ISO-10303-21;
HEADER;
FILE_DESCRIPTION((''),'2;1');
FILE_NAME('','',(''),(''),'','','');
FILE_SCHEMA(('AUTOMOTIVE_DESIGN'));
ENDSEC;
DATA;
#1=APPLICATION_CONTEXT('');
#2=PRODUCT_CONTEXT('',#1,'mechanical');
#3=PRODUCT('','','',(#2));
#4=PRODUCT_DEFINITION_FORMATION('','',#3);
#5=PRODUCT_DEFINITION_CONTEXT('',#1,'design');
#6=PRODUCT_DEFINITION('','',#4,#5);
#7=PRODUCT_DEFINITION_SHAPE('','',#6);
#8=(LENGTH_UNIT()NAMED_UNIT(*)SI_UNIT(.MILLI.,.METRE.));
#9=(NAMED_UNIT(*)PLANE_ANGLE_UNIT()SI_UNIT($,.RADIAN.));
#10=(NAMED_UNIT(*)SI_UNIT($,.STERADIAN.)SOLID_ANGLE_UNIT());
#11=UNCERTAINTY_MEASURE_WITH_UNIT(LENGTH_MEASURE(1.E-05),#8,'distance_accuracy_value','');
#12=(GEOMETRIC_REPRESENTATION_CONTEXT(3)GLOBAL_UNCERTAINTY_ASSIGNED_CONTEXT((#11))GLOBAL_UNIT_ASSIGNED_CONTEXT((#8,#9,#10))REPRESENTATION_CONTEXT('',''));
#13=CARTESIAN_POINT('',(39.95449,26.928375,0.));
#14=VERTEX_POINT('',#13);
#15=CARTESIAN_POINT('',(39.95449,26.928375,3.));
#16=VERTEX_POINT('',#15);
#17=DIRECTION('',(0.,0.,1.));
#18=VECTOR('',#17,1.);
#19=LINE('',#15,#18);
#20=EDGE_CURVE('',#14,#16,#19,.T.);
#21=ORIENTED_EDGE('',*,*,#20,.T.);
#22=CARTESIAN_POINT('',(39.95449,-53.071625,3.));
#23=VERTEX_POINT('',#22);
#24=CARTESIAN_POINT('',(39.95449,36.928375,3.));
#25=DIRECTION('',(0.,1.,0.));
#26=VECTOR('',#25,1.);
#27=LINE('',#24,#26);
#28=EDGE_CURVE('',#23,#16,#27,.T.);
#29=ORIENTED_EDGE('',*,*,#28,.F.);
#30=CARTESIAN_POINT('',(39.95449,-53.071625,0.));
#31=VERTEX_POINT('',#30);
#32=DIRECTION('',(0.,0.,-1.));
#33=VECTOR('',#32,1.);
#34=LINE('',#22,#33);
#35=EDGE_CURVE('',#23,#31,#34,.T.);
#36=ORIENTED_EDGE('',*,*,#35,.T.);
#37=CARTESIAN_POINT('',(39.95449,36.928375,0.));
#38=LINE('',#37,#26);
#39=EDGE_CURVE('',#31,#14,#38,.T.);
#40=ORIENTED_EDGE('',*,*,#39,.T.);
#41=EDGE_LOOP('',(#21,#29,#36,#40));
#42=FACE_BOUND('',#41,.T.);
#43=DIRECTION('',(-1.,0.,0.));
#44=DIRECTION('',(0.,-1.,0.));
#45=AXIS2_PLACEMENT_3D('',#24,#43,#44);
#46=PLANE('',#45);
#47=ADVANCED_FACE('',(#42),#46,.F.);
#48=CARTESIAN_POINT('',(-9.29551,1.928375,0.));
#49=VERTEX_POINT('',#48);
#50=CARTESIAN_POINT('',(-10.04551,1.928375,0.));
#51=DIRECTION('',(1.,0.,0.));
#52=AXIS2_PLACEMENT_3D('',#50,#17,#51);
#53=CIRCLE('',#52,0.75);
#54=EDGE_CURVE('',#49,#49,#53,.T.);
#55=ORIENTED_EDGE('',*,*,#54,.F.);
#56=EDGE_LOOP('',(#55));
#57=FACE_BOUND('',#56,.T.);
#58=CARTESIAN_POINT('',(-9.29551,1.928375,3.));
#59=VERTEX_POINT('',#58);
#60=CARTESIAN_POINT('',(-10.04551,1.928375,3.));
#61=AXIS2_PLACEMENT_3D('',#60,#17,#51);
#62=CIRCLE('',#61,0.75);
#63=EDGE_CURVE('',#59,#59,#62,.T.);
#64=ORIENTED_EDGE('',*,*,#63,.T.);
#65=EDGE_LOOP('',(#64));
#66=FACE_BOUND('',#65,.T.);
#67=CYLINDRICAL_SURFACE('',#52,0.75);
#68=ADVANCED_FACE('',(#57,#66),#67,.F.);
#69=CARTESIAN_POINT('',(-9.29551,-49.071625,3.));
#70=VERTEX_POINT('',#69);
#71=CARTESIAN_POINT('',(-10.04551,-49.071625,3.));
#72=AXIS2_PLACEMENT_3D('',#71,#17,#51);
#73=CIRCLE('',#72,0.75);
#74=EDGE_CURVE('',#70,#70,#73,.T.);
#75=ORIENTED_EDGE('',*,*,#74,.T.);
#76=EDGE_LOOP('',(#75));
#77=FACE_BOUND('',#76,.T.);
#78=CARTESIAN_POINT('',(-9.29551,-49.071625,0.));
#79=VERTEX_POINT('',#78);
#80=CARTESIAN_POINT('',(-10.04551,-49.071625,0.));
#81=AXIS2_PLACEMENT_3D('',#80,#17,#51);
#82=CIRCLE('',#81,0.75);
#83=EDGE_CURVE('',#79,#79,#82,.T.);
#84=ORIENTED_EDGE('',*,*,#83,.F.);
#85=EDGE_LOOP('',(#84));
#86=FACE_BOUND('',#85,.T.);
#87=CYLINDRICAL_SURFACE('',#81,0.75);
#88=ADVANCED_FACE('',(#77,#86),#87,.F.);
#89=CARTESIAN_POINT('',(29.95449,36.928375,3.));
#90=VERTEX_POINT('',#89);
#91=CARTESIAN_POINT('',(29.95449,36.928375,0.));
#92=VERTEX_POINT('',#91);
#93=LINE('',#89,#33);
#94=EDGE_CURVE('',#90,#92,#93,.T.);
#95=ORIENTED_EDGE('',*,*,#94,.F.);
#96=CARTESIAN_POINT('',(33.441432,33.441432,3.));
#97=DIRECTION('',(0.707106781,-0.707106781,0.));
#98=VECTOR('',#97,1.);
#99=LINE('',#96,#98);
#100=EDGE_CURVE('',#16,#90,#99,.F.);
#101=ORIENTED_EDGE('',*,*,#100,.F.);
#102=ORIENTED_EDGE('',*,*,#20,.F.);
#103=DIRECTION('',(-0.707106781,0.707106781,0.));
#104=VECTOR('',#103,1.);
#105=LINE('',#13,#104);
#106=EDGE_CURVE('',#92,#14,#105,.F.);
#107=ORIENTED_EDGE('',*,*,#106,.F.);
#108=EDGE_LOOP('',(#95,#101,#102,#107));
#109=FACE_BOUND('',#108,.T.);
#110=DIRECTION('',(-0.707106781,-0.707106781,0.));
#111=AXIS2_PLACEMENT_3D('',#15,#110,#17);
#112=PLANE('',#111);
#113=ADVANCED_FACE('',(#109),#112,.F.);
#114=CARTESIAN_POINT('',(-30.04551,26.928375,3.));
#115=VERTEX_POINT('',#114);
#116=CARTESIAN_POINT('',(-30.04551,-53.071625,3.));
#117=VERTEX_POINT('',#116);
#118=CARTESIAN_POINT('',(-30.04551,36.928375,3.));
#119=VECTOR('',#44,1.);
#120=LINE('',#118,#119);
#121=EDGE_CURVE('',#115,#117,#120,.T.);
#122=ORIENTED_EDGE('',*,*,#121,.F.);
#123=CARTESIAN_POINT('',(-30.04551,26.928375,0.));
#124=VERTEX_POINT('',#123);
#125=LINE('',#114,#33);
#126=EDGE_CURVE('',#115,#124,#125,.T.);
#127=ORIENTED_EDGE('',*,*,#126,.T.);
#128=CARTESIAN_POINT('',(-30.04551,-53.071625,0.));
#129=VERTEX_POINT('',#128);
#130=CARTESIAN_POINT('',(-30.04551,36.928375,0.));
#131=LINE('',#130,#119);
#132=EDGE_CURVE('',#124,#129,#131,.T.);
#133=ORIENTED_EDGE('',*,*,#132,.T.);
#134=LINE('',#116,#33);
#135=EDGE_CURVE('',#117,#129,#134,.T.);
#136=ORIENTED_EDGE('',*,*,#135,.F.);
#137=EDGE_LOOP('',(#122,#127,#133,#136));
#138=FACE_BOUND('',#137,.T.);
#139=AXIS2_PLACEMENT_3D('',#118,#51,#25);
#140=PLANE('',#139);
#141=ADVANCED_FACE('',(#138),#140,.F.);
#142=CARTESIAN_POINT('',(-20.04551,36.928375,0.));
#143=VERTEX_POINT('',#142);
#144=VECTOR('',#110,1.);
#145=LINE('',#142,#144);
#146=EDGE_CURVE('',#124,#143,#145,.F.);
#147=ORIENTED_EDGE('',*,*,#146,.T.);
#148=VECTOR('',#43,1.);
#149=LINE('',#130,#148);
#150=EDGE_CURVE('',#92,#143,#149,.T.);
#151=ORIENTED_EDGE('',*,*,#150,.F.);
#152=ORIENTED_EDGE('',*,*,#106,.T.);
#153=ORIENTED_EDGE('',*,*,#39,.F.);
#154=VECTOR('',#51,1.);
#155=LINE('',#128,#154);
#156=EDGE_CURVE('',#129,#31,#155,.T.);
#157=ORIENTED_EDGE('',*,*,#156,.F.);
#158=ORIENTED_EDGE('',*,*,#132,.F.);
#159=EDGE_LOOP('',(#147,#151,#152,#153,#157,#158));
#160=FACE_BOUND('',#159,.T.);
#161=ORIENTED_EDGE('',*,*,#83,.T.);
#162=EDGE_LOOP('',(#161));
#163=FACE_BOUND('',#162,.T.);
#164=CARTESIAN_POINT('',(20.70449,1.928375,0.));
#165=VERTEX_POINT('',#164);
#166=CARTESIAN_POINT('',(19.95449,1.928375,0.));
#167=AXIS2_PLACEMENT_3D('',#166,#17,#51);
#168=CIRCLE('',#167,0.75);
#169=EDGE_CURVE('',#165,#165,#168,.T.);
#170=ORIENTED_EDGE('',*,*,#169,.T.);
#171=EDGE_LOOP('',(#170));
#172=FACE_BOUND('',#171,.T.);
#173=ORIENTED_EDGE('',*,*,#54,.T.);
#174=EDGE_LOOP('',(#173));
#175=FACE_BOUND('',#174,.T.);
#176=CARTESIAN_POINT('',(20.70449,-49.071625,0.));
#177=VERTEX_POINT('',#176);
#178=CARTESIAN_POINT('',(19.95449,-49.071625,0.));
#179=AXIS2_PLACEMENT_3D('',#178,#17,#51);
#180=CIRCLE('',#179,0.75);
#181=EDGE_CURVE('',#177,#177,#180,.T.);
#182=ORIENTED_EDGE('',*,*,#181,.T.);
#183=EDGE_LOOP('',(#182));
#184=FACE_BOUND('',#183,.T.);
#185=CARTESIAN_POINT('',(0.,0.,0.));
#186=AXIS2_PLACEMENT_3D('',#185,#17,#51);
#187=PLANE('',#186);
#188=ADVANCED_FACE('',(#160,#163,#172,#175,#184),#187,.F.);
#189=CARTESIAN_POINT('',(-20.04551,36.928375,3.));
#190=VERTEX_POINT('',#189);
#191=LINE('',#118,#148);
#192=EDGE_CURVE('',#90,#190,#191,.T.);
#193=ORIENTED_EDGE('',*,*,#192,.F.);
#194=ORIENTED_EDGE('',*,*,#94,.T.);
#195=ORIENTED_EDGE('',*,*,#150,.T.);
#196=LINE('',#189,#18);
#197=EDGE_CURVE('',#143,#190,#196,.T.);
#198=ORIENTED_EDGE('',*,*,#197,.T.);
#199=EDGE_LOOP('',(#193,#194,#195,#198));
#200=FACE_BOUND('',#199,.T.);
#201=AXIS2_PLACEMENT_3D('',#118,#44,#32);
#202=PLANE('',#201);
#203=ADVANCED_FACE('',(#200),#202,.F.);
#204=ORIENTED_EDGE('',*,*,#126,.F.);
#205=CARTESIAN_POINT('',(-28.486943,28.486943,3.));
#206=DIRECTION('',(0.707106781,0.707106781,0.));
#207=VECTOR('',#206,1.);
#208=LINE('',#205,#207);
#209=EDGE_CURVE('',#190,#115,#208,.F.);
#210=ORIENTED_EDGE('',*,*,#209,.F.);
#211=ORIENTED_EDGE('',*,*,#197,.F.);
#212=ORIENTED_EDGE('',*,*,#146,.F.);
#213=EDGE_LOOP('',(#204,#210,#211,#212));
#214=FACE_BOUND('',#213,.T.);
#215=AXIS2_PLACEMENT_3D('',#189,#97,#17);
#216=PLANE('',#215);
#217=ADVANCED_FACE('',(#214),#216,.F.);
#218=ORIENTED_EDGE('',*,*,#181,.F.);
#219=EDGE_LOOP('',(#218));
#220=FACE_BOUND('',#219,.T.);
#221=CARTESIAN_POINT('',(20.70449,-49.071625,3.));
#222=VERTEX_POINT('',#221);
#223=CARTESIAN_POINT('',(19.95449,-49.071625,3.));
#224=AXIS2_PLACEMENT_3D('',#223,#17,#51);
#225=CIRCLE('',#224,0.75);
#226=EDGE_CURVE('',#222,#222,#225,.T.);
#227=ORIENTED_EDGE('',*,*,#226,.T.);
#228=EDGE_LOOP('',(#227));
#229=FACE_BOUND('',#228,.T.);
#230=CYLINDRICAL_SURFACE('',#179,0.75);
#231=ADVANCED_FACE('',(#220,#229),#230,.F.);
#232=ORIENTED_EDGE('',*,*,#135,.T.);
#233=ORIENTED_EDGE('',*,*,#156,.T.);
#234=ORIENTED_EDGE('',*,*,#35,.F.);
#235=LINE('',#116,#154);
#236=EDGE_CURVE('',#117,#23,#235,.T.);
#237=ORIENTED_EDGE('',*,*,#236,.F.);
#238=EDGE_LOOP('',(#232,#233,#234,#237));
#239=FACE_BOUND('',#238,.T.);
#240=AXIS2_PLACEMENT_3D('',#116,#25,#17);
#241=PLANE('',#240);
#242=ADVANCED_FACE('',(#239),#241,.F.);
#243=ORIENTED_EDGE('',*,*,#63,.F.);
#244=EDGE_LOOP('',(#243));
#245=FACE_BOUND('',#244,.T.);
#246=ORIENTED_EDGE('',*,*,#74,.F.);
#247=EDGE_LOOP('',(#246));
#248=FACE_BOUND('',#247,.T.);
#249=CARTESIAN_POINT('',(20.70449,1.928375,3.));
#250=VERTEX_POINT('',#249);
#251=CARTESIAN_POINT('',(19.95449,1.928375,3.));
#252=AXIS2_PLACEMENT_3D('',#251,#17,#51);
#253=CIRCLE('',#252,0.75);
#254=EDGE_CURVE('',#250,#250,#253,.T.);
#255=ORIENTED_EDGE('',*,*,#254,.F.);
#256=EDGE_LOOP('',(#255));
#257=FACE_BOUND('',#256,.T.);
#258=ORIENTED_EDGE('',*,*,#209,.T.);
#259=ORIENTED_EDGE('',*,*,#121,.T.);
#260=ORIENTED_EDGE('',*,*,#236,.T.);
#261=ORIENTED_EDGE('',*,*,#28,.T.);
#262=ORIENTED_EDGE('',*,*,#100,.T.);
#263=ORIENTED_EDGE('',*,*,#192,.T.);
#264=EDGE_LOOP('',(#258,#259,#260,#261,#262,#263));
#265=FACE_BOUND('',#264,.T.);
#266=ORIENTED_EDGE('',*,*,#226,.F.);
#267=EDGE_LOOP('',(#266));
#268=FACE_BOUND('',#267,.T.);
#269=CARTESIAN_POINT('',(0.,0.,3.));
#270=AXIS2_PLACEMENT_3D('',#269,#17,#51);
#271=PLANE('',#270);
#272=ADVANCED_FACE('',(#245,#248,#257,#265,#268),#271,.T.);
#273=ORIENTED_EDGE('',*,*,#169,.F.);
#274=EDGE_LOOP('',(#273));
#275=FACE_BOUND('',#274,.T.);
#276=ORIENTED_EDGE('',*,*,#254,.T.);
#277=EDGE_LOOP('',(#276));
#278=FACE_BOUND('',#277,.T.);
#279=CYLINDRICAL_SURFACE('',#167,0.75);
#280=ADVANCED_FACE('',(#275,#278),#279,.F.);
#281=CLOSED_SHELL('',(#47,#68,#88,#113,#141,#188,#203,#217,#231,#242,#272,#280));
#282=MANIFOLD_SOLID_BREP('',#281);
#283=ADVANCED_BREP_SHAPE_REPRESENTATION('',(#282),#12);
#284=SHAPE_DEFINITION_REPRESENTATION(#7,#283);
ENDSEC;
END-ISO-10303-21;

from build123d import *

# Parameters (mm, degrees)
CROQUIS1_W              = 70
CROQUIS1_H              = 90
SALIENTE_EXTRUIR1_DEPTH = 3
CROQUIS2_R              = 1
CORTAR_EXTRUIR1_DEPTH   = 3
CHAFL_N1_SIZE           = 10
CHAFL_N2_SIZE           = 10
CROQUIS4_W              = 66.199172227
CROQUIS4_H              = 50.611167931
SALIENTE_EXTRUIR2_DEPTH = 3
CROQUIS5_R              = 0.75
CORTAR_EXTRUIR2_DEPTH   = 67.497809415


with BuildPart() as part:
    # Croquis1 → Saliente-Extruir1 (new body)
    with BuildSketch(Plane.XY):
        with Locations((4.954489614, -8.071625344)):
            Rectangle(CROQUIS1_W, CROQUIS1_H)
    extrude(amount=SALIENTE_EXTRUIR1_DEPTH)

    # Croquis2 → Cortar-Extruir1 (cut)
    with BuildSketch(Plane(origin=(0, 0, 0), x_dir=(-1, 0, 0), z_dir=(0, 0, -1))):
        with Locations((-34.954489614, -49.571625344)):
            Circle(CROQUIS2_R)
        with Locations((25.045510386, -49.571625344)):
            Circle(CROQUIS2_R)
        with Locations((-34.954489614, -6.571625344)):
            Circle(CROQUIS2_R)
        with Locations((25.045510386, -6.571625344)):
            Circle(CROQUIS2_R)
    extrude(amount=-CORTAR_EXTRUIR1_DEPTH, mode=Mode.SUBTRACT)

    # Chaflán1
    chafl_n1_edges = [part.edges().sort_by_distance(p)[0] for p in [
        (39.954489614, 36.928374656, 1.5),
    ]]
    chamfer(chafl_n1_edges, length=CHAFL_N1_SIZE)

    # Chaflán2
    chafl_n2_edges = [part.edges().sort_by_distance(p)[0] for p in [
        (-30.045510386, 36.928374656, 1.5),
    ]]
    chamfer(chafl_n2_edges, length=CHAFL_N2_SIZE)

    # Croquis4 → Saliente-Extruir2 (add)
    with BuildSketch(Plane.XY.offset(3)):
        with Locations((4.57620863, -27.766041379)):
            Rectangle(CROQUIS4_W, CROQUIS4_H)
    extrude(amount=-SALIENTE_EXTRUIR2_DEPTH)

    # Croquis5 → Cortar-Extruir2 (cut, through all)
    with BuildSketch(Plane.XY.offset(3)):
        with Locations((-10.045510386, 1.928374656)):
            Circle(CROQUIS5_R)
        with Locations((19.954489614, 1.928374656)):
            Circle(CROQUIS5_R)
        with Locations((-10.045510386, -49.071625344)):
            Circle(CROQUIS5_R)
        with Locations((19.954489614, -49.071625344)):
            Circle(CROQUIS5_R)
    extrude(amount=-CORTAR_EXTRUIR2_DEPTH, mode=Mode.SUBTRACT)


solid = part.part
